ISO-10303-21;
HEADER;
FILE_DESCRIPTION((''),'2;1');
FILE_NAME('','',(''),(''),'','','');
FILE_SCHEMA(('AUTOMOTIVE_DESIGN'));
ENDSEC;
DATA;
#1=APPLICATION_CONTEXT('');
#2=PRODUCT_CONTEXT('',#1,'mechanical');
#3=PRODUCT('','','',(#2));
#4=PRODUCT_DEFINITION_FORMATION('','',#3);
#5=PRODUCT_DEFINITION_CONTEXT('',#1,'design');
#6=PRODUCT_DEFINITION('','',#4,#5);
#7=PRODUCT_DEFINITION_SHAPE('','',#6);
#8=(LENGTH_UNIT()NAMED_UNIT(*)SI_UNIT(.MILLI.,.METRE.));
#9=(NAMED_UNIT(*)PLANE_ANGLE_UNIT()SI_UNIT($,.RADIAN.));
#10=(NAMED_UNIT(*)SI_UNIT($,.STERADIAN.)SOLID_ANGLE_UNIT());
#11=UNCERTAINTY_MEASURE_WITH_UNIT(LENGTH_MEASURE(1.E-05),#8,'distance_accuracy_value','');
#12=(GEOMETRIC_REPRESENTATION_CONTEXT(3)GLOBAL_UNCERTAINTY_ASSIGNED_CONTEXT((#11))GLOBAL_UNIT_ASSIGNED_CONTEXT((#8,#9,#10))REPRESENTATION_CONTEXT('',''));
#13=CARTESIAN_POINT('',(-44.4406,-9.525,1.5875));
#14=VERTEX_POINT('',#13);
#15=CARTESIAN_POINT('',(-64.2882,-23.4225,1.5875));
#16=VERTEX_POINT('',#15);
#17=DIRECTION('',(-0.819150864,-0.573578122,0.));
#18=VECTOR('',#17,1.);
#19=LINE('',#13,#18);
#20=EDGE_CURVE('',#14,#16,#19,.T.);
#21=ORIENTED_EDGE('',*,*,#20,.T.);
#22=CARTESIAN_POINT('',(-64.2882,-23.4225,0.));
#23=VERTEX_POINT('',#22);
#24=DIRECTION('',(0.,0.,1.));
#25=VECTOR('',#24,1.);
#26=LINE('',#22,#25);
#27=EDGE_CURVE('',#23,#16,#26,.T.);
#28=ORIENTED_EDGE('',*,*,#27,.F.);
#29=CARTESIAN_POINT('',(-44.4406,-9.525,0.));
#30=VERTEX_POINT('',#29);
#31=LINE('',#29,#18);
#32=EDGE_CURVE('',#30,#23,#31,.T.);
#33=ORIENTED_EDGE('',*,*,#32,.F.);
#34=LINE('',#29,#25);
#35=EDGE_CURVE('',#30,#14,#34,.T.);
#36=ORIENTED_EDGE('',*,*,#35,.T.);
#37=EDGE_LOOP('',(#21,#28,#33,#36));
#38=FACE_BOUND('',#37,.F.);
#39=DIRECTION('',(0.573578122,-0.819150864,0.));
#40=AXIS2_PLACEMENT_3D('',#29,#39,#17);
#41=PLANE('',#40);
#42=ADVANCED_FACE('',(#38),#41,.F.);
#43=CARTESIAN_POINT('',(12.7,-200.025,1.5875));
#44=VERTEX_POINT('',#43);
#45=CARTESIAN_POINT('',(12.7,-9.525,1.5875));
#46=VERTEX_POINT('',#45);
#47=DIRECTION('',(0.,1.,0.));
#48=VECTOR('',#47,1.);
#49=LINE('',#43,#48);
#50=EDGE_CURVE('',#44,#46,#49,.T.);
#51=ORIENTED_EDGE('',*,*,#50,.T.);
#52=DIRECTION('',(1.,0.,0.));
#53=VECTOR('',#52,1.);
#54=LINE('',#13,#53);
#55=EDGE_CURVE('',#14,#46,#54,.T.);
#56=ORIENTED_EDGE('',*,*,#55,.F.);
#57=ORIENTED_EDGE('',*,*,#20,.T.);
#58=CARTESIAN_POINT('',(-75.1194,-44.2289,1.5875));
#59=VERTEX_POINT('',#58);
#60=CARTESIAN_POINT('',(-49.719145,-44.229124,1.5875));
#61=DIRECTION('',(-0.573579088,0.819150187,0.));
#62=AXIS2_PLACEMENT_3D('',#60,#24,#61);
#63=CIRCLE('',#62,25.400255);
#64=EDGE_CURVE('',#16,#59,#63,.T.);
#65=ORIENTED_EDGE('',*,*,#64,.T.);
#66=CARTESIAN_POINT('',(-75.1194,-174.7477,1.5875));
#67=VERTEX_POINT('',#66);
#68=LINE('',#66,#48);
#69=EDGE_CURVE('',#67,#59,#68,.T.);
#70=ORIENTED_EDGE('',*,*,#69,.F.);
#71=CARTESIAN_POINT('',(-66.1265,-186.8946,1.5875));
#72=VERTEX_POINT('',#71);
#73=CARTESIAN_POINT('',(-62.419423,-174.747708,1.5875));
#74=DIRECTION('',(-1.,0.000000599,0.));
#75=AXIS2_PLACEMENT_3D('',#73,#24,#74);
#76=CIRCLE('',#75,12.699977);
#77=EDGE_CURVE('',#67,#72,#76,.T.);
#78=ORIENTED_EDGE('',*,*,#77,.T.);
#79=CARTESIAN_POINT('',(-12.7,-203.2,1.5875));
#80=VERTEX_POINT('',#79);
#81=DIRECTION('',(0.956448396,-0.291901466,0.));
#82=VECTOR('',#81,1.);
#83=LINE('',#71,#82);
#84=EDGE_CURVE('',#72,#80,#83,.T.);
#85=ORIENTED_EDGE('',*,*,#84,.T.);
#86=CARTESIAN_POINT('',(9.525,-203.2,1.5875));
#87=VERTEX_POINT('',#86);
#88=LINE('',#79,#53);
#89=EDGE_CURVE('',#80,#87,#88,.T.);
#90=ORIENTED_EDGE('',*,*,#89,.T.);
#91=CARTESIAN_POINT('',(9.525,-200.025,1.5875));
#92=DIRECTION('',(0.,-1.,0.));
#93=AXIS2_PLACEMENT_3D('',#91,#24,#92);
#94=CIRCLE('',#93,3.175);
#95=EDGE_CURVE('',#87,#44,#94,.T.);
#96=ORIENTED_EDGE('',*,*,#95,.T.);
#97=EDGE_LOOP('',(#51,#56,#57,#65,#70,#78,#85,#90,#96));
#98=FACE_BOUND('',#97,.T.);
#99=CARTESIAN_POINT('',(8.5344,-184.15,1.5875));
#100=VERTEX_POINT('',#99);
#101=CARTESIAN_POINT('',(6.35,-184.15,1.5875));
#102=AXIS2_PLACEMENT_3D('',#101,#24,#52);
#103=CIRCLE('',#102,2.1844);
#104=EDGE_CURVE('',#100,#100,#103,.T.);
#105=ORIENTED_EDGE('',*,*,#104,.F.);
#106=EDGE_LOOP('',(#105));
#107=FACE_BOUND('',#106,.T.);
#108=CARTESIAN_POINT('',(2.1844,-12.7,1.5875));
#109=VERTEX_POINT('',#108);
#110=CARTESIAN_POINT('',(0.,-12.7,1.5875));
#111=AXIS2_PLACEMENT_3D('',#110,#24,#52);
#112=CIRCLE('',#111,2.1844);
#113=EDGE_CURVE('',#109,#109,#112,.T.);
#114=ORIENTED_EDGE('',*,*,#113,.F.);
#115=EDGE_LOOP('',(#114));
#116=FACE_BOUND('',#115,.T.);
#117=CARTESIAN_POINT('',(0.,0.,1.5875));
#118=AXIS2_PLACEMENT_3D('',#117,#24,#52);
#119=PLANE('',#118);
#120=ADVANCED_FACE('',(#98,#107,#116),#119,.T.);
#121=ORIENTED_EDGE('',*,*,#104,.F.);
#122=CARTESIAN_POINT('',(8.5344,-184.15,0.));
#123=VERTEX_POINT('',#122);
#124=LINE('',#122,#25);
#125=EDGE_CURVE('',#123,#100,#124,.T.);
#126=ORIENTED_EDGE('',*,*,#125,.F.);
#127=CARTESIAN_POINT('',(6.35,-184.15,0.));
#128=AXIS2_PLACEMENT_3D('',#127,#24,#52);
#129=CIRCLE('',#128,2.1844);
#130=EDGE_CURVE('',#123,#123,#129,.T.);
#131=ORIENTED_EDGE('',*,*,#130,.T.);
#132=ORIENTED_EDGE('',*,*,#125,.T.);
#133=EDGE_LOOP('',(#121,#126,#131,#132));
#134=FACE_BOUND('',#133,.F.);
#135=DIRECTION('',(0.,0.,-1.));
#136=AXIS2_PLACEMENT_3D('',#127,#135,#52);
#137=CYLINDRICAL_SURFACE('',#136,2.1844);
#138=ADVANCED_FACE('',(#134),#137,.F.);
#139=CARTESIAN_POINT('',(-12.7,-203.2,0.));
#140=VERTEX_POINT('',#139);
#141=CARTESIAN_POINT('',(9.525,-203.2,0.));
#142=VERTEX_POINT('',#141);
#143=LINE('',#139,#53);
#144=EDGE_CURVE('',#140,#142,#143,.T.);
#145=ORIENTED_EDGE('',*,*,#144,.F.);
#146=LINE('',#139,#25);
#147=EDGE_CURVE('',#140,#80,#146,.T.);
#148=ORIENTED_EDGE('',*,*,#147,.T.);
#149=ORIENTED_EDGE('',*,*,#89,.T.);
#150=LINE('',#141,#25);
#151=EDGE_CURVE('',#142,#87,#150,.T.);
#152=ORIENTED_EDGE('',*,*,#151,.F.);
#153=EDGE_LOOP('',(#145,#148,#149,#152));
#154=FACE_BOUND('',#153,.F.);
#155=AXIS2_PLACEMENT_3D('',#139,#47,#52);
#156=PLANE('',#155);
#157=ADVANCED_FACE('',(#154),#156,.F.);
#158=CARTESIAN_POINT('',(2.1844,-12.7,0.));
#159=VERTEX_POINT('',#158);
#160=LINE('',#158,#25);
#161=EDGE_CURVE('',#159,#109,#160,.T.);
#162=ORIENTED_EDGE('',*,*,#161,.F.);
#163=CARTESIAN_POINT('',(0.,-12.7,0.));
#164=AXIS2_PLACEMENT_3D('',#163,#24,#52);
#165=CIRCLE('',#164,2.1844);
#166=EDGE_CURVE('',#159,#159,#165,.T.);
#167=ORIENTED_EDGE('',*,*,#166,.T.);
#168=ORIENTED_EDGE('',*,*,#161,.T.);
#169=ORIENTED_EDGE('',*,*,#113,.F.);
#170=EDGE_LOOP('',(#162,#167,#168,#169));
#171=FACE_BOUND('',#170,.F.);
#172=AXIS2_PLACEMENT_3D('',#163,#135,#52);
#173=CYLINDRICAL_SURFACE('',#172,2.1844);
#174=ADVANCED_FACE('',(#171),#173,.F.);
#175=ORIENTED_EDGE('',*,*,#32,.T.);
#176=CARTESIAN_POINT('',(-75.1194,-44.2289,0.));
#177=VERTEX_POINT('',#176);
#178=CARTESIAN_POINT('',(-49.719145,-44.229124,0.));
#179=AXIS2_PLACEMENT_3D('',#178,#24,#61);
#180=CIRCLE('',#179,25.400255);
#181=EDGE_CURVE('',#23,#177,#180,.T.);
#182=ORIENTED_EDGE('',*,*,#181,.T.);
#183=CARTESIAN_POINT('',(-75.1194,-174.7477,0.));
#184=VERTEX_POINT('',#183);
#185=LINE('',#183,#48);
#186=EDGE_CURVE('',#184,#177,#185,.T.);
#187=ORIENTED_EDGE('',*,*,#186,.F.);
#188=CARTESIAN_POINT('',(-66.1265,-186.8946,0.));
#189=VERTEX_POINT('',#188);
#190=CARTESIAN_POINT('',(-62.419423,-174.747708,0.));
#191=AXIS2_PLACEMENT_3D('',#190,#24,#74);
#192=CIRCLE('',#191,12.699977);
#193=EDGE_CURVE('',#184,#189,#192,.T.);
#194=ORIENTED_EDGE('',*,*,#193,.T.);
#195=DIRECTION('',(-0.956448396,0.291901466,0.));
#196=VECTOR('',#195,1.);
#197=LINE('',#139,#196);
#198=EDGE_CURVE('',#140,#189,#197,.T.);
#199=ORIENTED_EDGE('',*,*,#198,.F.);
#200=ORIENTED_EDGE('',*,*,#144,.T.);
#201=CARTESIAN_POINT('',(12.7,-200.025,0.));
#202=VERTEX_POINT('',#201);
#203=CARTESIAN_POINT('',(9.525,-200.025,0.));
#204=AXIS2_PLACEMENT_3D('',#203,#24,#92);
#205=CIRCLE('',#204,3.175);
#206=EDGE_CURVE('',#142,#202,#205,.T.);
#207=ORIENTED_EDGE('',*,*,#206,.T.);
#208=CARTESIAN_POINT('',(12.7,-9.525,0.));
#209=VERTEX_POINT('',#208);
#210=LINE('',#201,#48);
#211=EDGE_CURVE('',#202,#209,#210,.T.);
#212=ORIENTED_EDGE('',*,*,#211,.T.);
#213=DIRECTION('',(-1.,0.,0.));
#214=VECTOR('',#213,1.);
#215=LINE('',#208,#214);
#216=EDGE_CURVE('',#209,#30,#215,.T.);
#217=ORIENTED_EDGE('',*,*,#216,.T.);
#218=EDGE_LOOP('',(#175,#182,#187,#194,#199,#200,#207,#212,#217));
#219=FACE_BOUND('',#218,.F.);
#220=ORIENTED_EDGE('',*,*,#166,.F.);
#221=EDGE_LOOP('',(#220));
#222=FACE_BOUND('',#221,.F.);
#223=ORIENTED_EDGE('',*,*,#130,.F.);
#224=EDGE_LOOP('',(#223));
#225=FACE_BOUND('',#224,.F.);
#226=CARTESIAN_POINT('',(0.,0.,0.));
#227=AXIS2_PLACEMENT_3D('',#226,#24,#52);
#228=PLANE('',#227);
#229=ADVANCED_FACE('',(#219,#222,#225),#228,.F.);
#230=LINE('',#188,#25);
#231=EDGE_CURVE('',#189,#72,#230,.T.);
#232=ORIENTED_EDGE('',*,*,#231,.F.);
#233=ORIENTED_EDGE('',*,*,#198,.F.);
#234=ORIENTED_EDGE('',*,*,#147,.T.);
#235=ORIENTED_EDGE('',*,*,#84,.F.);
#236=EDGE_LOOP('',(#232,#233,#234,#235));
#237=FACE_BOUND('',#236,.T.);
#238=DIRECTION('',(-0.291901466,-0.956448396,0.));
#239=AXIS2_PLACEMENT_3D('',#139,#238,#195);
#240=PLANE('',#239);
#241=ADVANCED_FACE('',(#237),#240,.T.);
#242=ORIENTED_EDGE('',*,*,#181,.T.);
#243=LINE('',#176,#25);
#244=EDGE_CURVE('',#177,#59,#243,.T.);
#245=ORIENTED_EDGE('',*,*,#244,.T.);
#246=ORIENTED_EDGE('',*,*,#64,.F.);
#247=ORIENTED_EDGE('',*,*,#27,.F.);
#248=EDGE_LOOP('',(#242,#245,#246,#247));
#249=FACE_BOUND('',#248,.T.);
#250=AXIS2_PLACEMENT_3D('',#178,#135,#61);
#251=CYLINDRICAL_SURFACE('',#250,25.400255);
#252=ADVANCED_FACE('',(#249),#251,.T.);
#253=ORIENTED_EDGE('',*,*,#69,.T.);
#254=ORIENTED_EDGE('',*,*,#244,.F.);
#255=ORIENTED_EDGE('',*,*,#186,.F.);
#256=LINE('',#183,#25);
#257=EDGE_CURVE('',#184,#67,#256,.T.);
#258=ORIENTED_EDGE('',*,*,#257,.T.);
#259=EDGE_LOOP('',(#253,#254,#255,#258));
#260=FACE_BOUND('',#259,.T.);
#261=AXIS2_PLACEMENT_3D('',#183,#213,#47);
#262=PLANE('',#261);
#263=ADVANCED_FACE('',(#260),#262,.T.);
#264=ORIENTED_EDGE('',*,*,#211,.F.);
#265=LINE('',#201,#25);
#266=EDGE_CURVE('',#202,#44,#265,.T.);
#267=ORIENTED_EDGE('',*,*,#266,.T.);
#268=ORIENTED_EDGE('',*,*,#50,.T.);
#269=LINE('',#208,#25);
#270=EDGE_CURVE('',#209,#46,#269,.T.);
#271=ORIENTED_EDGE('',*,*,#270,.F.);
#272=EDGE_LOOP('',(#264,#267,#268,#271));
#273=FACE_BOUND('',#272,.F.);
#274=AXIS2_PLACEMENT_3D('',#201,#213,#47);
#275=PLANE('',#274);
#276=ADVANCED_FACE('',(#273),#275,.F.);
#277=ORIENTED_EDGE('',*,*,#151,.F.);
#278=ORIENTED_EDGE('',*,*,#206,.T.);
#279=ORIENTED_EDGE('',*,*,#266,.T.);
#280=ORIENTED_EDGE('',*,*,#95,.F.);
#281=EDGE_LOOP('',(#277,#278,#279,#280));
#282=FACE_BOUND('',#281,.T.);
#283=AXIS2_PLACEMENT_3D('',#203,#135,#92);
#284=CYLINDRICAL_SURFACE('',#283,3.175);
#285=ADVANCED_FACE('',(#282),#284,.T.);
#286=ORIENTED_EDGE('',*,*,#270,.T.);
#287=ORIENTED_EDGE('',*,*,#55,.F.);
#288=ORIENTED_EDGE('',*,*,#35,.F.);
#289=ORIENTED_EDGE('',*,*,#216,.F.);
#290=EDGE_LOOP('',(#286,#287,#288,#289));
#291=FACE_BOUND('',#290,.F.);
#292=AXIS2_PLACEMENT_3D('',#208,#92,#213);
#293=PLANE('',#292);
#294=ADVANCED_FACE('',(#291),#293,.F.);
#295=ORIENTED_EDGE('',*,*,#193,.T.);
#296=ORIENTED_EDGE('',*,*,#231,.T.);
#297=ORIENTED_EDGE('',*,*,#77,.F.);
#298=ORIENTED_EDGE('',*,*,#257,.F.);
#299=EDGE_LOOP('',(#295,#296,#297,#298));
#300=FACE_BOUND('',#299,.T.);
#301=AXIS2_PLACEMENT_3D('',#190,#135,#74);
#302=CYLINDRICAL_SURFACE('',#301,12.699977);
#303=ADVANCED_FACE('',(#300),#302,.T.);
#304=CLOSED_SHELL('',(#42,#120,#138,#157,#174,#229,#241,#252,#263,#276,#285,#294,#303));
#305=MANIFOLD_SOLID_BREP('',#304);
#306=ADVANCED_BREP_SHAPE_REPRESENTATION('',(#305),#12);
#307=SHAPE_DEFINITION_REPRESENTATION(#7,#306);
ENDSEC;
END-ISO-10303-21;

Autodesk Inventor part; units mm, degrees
ref_plane "YZ Plane" through (0, 0, 0) normal (1, 0, 0) x (0, 1, 0)
ref_plane "XZ Plane" through (0, 0, 0) normal (0, 1, 0) x (-1, 0, 0)
ref_plane "XY Plane" through (0, 0, 0) normal (0, 0, 1) x (1, 0, 0)
sketch "main" plane through (0, 0, 0) normal (0, 0, 1) x (1, 0, 0)
  line L0 (38.5419, -100.052) -> (38.5419, 90.448)
  line L1 (-49.2775, -74.7747) -> (-49.2775, 55.744)
  arc A0 (-49.2775, -74.7747) -> (-40.2846, -86.9216) centre (-36.5775, -74.7747) ccw
  line L2 (13.1419, -103.227) -> (-40.2846, -86.9216)
  circle A1 centre (32.1919, -84.177) radius 2.1844
  line L3 (13.1419, -103.227) -> (35.3669, -103.227)
  arc A2 (35.3669, -103.227) -> (38.5419, -100.052) centre (35.3669, -100.052) ccw
  arc A3 (-38.4463, 76.5505) -> (-49.2775, 55.744) centre (-23.8775, 55.744) ccw
  line L4 (-18.5987, 90.448) -> (-38.4463, 76.5505)
  circle A4 centre (25.8419, 87.273) radius 2.1844
  line L5 (38.5419, 90.448) -> (-18.5987, 90.448)
  point P0 (0.4559, 3.9187)
  point P1 (-49.2775, 68.9664)
  dimension "d3" = 25.4
  dimension "d4" = 12.7
  dimension "d7" = 4.3688
sketch "Sketch1" plane through (0, 0, 0) normal (0, 0, 1) x (1, 0, 0)
  line L0 (-22.225, -9.525) -> (-22.225, -200.293)
  line L1 (12.7, -200.025) -> (12.7, -9.525)
  line L2 (-75.1194, -174.7477) -> (-75.1194, -44.2289)
  arc A0 (-75.1194, -174.7477) -> (-66.1265, -186.8946) centre (-62.4194, -174.7477) ccw
  line L3 (-12.7, -203.2) -> (-66.1265, -186.8946)
  circle A1 centre (6.35, -184.15) radius 2.1844
  line L4 (-12.7, -203.2) -> (9.525, -203.2)
  arc A2 (9.525, -203.2) -> (12.7, -200.025) centre (9.525, -200.025) ccw
  arc A3 (-64.2882, -23.4225) -> (-75.1194, -44.2289) centre (-49.7194, -44.2289) ccw
  line L5 (-44.4406, -9.525) -> (-64.2882, -23.4225)
  circle A4 centre (0, -12.7) radius 2.1844
  line L6 (12.7, -9.525) -> (-44.4406, -9.525)
  point P0 (0, 0)
extrude "Extrusion2" add sketch "Sketch1" along normal blind 1.5875
equation "\"BendRadius\" = Thickness"
equation "\"BendReliefWidth\" = Thickness"
equation "\"BendReliefDepth\" = 0.5 * Thickness"
equation "\"CornerReliefSize\" = 4 * Thickness"
equation "\"MinimumRemnant\" = 2 * Thickness"
equation "\"TransitionRadius\" = BendRadius"
equation "\"JacobiRadiusSize\" = BendRadius"
equation "\"GapSize\" = Thickness"
equation "\"Thickness\" = 1.5875"
properties part number "wing" material "Acetal Resin, White"
